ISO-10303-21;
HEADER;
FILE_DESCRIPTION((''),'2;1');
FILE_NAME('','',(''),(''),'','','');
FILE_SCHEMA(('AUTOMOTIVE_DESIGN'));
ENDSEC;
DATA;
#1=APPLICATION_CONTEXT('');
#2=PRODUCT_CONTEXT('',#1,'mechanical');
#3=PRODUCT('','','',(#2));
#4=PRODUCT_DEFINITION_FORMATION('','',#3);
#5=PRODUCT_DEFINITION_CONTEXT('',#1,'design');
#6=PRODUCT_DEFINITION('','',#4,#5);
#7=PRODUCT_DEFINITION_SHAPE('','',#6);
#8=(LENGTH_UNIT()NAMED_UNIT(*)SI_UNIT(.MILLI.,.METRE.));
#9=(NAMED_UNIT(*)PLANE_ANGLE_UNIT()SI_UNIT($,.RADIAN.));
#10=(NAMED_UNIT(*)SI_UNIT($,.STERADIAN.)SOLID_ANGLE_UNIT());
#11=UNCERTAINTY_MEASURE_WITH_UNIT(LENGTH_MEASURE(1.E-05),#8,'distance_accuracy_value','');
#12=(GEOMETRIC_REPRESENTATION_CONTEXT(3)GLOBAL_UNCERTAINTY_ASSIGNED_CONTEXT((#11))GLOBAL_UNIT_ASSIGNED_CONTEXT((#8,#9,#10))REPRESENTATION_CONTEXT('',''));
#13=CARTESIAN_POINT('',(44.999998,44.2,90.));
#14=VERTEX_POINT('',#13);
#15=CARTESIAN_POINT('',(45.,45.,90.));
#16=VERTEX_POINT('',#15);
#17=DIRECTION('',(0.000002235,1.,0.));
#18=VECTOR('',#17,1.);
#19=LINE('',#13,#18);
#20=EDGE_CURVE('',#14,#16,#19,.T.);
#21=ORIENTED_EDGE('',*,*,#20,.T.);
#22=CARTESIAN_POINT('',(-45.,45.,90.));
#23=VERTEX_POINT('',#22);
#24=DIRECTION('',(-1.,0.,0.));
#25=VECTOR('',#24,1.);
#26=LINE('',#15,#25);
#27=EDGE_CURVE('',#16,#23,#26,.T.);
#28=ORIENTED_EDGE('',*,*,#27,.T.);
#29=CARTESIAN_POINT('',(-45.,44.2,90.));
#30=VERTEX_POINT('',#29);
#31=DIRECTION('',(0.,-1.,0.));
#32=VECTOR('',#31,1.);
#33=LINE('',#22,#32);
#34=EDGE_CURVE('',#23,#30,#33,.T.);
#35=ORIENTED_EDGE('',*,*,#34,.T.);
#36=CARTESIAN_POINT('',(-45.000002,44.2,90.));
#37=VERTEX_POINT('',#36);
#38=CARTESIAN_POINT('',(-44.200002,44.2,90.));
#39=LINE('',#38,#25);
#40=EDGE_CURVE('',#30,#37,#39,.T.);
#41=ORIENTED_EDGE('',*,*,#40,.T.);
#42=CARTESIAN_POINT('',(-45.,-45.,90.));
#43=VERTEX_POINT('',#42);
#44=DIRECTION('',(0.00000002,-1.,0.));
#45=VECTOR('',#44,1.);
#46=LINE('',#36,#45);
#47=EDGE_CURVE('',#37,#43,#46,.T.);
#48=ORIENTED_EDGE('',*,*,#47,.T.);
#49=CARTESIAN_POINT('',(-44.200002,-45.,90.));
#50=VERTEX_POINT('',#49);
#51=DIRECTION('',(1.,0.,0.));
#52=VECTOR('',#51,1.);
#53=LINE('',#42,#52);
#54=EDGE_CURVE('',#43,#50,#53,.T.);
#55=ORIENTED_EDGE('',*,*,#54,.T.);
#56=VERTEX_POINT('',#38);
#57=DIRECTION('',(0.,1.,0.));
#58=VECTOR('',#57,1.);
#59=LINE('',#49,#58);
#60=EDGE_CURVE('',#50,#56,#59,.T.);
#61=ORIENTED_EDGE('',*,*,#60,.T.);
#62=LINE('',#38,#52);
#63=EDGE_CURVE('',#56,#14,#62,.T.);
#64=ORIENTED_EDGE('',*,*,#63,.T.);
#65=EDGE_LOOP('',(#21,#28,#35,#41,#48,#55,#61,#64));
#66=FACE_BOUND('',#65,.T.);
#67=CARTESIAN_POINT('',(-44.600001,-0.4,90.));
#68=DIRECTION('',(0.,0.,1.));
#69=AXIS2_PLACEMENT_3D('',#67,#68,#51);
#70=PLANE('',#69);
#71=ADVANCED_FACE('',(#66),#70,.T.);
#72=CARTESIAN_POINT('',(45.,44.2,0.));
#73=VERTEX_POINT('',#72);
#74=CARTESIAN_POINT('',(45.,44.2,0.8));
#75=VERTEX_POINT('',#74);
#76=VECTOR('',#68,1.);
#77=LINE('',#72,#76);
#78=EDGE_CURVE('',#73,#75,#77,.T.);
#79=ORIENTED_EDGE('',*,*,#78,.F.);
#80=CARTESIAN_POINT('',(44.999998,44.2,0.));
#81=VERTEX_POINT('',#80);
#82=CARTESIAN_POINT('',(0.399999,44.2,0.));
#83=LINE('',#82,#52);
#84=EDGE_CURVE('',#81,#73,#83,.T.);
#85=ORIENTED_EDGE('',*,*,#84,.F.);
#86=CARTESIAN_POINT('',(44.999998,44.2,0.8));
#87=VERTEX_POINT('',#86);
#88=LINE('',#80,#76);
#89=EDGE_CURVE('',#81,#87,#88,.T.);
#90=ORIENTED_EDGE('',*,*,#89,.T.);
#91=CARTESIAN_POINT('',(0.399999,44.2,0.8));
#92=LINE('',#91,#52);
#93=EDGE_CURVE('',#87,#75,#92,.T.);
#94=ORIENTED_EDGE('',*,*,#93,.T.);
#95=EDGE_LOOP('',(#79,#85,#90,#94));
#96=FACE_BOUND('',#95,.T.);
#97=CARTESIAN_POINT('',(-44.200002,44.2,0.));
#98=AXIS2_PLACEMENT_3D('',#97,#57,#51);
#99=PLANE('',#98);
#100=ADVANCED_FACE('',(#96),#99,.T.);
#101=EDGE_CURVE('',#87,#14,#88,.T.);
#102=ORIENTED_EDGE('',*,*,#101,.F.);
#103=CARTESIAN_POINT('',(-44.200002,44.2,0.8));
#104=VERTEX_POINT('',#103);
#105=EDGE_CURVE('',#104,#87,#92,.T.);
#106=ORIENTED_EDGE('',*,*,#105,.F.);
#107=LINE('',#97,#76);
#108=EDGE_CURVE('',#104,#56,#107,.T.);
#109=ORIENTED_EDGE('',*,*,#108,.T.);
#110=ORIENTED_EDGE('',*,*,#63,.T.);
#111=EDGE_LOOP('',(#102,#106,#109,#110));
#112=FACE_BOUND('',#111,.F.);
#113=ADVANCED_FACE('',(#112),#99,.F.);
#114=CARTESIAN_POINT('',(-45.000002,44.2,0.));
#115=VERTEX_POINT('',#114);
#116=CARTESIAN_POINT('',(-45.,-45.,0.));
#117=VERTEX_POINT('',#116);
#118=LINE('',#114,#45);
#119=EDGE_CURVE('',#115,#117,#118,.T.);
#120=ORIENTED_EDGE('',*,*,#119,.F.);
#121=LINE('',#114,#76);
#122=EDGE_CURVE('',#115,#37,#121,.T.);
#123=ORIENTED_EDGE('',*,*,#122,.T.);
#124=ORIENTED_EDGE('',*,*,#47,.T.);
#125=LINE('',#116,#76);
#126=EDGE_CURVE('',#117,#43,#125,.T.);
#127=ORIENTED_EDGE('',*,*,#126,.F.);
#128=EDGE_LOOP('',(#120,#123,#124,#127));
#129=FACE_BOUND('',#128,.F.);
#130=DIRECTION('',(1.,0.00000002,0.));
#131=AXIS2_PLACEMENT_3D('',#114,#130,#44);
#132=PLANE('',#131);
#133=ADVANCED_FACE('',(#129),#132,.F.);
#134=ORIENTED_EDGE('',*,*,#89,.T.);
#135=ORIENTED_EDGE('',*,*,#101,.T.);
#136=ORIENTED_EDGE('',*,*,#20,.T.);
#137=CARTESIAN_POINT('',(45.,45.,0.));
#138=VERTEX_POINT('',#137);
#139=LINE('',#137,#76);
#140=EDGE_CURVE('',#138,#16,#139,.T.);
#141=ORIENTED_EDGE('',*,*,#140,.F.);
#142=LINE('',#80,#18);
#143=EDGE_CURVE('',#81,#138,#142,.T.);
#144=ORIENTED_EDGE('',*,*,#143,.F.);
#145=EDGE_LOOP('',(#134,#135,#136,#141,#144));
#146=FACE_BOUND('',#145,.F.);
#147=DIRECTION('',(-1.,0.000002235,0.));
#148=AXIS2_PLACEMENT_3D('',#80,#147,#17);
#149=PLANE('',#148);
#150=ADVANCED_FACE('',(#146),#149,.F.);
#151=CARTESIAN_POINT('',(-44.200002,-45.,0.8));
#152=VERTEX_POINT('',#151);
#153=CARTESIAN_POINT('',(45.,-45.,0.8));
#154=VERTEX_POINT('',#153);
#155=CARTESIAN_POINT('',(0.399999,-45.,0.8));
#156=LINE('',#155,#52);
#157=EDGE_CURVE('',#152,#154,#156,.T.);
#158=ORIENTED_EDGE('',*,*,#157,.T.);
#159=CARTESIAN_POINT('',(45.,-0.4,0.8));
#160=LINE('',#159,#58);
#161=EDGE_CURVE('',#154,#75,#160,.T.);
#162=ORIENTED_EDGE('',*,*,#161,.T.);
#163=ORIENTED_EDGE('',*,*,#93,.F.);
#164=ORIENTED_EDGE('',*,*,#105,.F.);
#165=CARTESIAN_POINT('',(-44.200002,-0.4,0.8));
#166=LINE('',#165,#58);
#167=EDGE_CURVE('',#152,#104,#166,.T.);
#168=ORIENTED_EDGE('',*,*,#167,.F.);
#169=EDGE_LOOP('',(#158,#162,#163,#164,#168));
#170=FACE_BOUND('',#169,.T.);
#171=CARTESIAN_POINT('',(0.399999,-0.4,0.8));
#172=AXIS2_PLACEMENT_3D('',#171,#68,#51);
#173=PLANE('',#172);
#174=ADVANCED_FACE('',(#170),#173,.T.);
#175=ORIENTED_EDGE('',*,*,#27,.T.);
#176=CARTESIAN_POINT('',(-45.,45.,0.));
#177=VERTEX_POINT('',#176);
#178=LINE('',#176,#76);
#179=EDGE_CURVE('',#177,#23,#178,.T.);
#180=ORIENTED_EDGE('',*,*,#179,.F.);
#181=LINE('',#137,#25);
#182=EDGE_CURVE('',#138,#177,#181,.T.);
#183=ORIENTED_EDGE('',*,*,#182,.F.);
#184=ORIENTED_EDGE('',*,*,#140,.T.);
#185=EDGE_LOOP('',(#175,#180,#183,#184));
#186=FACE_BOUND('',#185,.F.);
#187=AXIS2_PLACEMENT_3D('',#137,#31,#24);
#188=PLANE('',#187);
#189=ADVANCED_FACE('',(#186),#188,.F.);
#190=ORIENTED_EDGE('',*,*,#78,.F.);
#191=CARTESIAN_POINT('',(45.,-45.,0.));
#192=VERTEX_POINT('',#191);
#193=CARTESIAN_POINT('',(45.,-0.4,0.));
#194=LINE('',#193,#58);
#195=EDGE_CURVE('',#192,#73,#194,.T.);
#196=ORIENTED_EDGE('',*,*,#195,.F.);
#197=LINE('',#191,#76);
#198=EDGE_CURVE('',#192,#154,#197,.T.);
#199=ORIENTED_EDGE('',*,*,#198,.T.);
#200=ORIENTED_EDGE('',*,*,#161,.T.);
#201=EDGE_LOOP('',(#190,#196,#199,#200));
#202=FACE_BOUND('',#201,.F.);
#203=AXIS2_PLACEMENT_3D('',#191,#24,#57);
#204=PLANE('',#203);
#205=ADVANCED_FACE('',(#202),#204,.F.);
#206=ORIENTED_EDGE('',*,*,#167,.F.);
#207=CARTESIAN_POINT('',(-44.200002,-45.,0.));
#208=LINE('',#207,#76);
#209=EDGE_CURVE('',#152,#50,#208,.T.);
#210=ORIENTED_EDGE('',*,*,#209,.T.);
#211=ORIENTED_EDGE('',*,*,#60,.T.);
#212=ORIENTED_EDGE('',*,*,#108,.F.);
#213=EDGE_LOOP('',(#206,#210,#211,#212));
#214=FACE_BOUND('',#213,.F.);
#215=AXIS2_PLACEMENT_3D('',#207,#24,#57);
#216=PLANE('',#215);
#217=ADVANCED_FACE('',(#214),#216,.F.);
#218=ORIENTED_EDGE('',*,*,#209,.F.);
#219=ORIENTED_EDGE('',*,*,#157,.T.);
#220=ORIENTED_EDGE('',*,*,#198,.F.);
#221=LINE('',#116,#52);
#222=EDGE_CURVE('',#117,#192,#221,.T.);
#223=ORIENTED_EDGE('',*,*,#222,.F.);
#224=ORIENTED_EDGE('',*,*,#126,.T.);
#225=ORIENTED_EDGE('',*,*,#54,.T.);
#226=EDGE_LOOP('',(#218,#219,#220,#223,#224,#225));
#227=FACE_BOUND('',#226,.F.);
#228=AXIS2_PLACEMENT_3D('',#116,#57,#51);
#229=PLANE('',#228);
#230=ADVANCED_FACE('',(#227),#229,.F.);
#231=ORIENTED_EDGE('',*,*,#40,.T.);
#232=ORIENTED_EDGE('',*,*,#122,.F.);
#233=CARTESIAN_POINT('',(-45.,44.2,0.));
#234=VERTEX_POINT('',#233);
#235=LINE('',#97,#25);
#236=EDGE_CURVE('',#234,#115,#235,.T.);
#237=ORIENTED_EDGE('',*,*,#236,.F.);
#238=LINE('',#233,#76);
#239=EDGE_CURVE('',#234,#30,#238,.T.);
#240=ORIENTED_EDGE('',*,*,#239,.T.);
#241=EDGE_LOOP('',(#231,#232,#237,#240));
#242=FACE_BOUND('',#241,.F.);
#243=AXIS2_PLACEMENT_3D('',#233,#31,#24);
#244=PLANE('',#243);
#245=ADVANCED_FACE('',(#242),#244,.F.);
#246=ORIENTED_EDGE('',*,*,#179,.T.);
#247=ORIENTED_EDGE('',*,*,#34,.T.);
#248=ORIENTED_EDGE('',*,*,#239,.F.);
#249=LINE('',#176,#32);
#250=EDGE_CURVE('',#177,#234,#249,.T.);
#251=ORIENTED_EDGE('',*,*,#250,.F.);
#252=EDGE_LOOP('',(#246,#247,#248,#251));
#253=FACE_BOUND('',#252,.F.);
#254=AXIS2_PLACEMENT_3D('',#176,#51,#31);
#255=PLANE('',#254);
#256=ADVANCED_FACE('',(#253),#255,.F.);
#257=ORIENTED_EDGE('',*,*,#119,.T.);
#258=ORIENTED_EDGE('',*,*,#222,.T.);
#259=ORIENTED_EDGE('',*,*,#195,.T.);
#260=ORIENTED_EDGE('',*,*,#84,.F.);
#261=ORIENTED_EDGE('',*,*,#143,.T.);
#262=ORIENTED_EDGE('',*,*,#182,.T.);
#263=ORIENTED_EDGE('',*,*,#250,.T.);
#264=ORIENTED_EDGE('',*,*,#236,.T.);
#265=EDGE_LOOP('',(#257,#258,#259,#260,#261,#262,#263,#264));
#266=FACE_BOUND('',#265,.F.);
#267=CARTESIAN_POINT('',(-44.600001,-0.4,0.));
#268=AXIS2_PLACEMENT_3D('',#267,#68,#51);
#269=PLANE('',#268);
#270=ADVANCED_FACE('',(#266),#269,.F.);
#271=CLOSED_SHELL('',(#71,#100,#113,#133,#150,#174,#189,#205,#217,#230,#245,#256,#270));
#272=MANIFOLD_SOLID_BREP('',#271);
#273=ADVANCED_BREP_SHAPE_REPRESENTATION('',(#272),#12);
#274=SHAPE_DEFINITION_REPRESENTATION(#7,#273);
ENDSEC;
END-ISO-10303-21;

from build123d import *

# Parameters (mm, degrees)
F0_W     = 89.2000017881
F0_H     = 89.2
F1_DEPTH = 0.8
F2_DEPTH = 90


# Not quite as in the source:
# - ends of sketch curves that miss each other by under 0.0002 mm in the source are joined


with BuildPart() as f1:
    # F0 (on Top) → F1 (new body)
    with BuildSketch(Plane.XY):
        with Locations((0.3999991059, -0.4)):
            Rectangle(F0_W, F0_H)
    extrude(amount=F1_DEPTH)

    # F0 (on Top) → F2 (join)
    with BuildSketch(Plane.XY):
        Polygon((-45, -45), (-44.2000017881, -45), (-44.2000017881, 44.2), (-45.0000017881, 44.2), align=None)
        Polygon((-44.2000017881, 44.2), (44.9999982119, 44.2), (45, 45), (-45, 45), (-45, 44.2), align=None)
    extrude(amount=F2_DEPTH)


solid = f1.part
